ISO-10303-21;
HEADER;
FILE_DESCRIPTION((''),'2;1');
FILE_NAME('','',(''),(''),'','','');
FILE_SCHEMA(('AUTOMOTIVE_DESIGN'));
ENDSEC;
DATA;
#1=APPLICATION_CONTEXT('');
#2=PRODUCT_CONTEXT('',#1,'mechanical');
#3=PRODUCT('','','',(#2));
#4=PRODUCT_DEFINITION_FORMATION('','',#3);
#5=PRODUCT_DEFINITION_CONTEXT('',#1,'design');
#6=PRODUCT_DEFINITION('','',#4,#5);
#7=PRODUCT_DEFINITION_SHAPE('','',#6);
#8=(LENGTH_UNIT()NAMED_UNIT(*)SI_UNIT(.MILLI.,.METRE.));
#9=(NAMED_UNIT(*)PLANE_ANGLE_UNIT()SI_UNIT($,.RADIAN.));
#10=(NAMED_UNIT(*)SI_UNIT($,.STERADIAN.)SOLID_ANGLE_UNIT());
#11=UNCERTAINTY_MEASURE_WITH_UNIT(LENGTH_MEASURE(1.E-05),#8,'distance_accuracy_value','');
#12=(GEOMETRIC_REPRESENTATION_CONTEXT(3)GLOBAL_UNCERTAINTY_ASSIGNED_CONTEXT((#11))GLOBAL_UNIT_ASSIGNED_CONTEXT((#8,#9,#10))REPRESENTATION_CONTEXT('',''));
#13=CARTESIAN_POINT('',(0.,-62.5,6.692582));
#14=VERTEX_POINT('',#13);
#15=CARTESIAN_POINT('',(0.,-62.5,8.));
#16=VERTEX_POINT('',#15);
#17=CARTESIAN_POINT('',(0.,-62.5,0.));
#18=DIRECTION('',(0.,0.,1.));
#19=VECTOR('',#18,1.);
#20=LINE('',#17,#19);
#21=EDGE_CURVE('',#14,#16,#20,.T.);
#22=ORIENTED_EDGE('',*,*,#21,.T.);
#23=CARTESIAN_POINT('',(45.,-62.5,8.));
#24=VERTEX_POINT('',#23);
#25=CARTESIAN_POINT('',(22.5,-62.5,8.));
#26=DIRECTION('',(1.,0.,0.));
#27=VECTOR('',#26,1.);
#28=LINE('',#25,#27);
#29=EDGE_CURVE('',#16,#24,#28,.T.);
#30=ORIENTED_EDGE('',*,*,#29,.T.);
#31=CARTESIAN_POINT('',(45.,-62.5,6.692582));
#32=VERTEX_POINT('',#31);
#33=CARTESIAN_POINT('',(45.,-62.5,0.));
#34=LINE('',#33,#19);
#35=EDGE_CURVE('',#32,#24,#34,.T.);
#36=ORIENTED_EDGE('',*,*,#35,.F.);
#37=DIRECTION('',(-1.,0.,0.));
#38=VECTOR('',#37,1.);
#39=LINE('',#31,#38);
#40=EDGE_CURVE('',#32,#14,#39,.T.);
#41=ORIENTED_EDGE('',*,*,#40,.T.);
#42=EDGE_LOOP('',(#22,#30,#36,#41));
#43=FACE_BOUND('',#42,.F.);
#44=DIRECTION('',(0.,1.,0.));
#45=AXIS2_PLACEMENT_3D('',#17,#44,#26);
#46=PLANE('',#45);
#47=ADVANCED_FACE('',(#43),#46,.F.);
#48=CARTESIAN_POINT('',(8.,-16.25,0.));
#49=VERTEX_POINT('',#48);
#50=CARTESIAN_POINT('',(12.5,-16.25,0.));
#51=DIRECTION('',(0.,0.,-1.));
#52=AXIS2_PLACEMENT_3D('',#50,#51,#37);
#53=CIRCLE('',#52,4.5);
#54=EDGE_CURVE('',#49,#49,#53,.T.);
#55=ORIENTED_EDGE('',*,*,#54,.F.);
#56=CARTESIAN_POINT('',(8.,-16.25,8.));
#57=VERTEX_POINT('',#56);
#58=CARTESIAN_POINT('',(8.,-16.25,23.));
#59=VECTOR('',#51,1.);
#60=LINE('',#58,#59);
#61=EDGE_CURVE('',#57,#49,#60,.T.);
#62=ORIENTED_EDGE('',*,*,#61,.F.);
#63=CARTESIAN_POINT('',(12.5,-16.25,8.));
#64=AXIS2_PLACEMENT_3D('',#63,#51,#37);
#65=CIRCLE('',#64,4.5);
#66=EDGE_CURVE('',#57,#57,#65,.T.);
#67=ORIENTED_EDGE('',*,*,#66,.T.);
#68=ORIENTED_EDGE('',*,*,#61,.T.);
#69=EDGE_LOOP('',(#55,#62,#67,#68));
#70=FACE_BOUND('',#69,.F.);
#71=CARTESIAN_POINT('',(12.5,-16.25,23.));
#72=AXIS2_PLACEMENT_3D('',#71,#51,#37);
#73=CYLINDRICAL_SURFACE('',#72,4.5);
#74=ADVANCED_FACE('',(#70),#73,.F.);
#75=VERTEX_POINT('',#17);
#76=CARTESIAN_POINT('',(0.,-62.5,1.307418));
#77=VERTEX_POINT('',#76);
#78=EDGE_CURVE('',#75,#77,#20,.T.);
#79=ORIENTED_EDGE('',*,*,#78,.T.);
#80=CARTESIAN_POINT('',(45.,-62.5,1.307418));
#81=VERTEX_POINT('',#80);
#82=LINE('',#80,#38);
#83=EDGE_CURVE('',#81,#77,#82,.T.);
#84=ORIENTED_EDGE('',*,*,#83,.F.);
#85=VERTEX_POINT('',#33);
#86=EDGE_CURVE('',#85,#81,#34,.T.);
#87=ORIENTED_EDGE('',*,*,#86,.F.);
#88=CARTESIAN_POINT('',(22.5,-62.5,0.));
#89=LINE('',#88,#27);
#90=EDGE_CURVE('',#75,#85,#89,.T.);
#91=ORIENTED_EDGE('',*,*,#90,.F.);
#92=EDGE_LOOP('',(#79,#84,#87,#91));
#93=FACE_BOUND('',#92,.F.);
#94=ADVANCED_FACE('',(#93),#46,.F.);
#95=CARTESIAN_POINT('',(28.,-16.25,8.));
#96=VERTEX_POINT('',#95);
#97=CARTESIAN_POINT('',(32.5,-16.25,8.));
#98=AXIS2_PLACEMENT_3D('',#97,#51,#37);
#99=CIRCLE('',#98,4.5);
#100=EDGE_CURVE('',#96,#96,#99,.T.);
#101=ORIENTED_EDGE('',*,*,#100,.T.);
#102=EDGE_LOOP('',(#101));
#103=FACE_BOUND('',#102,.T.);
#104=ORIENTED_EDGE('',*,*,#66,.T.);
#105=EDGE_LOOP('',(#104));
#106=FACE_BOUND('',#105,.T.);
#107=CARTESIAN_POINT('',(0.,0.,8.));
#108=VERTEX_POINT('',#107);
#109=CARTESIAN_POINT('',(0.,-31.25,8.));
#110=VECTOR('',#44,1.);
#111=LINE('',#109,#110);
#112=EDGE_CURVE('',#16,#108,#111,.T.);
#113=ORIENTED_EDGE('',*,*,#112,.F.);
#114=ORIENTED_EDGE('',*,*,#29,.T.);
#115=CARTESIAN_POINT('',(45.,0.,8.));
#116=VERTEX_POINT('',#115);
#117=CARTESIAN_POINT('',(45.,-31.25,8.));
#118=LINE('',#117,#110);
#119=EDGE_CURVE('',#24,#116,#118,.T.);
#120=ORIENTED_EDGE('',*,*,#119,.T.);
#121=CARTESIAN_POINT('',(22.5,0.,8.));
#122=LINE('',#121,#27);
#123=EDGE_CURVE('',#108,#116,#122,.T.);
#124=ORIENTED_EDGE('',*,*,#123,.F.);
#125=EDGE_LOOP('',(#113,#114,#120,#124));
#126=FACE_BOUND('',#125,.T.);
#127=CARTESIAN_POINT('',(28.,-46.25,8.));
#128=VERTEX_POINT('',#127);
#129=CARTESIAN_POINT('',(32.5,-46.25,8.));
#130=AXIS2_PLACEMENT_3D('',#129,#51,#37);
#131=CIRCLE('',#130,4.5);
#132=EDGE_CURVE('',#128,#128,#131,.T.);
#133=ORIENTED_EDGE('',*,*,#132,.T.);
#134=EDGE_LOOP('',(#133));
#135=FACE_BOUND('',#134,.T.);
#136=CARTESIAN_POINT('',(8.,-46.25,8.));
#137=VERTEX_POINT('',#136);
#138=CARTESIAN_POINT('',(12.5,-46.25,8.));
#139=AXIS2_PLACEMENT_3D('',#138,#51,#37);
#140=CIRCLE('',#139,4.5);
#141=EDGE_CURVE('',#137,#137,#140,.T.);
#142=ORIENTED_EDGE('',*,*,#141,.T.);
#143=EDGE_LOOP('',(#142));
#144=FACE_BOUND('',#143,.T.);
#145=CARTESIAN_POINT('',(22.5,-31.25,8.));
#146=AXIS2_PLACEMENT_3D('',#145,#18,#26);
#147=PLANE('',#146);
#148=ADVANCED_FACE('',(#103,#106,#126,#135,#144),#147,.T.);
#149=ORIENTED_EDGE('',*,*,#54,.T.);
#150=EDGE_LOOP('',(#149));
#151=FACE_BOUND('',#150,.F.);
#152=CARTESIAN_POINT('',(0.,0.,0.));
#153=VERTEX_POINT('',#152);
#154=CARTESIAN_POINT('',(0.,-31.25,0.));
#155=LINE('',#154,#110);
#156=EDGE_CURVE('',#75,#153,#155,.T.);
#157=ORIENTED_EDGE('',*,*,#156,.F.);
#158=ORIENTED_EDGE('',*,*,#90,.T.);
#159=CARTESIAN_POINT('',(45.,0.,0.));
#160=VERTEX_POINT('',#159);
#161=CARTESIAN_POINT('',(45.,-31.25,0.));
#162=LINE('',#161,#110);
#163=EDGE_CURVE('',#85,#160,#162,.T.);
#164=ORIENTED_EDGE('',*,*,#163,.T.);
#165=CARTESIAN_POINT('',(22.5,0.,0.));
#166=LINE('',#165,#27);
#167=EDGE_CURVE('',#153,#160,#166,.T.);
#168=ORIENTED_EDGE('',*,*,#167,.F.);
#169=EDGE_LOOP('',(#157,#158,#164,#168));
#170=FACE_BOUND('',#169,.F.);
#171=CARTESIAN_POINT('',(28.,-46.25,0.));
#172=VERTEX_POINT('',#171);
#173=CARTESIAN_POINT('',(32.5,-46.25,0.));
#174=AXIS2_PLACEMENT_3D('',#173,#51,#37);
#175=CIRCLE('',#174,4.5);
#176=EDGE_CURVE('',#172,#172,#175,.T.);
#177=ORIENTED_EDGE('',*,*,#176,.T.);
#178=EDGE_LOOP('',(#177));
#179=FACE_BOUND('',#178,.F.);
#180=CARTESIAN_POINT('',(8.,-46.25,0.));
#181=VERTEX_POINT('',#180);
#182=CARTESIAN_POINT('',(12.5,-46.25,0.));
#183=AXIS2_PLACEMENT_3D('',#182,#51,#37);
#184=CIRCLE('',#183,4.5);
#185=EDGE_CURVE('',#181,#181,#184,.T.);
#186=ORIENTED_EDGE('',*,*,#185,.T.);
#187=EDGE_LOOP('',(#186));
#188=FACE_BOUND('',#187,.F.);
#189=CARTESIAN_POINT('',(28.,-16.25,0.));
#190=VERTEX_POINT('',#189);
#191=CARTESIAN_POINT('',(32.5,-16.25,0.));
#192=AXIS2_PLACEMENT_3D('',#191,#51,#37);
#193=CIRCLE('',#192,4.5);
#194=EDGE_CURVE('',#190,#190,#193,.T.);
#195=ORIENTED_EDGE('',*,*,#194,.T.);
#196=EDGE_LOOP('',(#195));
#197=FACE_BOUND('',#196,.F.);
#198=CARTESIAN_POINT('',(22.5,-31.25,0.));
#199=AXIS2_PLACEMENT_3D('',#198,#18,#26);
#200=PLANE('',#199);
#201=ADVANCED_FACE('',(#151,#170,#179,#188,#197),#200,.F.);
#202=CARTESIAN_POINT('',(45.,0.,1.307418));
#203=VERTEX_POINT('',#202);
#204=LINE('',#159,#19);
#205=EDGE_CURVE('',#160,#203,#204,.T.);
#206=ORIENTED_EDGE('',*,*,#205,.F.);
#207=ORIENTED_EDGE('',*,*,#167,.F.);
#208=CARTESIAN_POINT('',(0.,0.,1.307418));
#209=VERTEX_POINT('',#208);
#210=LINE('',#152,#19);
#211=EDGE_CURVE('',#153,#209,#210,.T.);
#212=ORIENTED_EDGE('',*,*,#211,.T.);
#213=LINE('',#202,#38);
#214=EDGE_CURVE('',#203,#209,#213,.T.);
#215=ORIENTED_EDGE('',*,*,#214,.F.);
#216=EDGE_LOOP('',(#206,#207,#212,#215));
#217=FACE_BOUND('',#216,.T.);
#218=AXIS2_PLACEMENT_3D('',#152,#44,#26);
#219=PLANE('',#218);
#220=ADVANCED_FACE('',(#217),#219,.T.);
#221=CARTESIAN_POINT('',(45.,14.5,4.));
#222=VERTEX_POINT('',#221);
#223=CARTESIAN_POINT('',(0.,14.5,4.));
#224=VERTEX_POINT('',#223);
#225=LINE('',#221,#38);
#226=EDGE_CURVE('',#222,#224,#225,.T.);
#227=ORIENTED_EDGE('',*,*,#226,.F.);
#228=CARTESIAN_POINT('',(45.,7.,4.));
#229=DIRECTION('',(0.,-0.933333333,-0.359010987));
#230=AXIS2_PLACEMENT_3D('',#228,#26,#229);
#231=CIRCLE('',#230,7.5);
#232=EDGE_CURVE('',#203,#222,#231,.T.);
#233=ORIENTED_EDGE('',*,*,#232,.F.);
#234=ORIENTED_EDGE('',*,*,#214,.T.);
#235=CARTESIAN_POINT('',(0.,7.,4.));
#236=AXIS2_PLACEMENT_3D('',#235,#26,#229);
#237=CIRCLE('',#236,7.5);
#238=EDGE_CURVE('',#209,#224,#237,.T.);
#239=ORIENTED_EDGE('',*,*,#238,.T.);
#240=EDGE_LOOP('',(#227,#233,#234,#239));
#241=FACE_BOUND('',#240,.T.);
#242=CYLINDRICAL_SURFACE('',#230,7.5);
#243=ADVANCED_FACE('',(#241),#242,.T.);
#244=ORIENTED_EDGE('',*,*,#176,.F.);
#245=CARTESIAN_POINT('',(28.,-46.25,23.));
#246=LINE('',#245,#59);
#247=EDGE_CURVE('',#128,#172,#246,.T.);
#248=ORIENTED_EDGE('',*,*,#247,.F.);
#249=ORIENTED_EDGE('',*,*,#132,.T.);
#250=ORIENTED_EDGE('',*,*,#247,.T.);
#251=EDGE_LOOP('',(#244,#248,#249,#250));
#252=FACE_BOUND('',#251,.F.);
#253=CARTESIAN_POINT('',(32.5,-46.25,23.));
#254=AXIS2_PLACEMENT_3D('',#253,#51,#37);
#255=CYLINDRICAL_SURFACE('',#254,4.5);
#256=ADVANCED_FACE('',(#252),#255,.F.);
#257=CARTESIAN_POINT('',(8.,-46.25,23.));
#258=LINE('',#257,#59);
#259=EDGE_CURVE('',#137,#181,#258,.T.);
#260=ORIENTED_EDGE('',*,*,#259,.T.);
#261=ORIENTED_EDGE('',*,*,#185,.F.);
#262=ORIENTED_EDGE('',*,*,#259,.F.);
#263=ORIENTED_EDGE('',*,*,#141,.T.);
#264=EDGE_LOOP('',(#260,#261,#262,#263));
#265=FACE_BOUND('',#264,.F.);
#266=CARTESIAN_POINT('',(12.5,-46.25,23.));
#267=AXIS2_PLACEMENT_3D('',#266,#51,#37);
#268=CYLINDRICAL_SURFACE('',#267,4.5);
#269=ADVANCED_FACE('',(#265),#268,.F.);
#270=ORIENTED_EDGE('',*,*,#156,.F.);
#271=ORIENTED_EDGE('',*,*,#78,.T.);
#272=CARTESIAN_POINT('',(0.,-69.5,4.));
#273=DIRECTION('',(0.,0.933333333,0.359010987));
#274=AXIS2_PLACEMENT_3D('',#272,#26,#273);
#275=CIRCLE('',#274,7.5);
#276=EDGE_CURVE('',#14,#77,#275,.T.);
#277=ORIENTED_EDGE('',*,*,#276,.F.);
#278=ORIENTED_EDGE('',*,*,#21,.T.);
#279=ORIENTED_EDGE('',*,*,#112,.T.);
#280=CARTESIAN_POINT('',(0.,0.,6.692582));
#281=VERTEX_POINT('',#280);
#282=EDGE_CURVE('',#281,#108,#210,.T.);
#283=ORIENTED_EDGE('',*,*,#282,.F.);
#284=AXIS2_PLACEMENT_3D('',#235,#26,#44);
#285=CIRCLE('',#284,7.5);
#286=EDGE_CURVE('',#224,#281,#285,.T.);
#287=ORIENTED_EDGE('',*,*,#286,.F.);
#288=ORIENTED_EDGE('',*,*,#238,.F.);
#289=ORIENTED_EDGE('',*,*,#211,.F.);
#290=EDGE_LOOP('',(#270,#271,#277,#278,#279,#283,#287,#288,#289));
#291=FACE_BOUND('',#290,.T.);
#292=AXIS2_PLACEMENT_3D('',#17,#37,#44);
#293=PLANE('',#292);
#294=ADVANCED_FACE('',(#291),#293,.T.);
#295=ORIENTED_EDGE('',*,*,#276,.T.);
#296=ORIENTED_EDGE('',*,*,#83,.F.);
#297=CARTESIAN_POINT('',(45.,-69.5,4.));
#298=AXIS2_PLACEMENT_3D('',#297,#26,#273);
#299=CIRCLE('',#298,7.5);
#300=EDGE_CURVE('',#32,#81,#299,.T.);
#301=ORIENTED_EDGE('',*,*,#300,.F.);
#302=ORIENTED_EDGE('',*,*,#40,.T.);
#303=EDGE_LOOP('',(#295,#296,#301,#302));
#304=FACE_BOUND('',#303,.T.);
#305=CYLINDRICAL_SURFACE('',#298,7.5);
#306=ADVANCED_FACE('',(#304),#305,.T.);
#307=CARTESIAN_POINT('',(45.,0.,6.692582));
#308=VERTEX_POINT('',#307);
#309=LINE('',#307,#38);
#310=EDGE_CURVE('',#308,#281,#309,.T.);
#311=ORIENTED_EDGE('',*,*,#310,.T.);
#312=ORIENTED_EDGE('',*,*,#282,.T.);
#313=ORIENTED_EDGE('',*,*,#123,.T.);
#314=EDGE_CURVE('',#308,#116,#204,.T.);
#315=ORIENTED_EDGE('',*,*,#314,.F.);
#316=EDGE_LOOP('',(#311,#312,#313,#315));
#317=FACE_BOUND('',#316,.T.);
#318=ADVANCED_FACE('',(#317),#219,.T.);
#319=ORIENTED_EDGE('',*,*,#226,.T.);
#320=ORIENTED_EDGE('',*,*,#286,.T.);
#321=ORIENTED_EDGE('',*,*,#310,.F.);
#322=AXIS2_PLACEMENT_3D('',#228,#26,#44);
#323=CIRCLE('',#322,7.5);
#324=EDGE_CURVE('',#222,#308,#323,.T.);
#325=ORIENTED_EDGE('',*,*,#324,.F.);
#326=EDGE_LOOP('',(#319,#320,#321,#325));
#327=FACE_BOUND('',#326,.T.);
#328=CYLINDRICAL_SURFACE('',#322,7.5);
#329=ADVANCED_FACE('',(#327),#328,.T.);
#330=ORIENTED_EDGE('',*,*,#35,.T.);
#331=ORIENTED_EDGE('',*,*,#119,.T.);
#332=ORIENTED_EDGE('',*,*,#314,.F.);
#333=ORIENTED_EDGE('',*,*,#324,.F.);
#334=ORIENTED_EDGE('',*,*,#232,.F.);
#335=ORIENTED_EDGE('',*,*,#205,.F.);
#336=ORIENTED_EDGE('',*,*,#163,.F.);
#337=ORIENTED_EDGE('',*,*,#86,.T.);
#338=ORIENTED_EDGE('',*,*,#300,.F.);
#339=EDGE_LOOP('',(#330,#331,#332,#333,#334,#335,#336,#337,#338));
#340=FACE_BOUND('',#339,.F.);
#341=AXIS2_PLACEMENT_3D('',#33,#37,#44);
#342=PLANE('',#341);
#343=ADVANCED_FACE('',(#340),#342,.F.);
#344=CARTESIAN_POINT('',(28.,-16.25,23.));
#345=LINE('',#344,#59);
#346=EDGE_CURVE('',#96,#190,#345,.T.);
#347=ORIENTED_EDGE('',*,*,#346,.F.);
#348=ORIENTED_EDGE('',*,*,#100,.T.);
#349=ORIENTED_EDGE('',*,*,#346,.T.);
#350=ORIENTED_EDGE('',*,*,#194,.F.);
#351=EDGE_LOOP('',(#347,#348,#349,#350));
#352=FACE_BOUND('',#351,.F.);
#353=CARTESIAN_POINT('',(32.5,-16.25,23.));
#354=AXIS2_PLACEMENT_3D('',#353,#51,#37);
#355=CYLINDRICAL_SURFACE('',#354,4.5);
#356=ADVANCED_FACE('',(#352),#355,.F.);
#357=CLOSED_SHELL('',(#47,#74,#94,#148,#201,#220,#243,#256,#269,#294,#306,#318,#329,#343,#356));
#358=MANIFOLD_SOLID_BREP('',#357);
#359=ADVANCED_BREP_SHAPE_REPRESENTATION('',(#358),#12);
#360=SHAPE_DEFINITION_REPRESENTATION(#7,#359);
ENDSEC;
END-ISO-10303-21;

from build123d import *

# Parameters (mm, degrees)
F0_W     = 45
F0_H     = 62.5
F1_DEPTH = 8
F3_D     = 9
F3_DEPTH = 15
F3_TIP   = 2.7038727856
F5_DEPTH = 45


with BuildPart() as f1:
    # F0 (on Top) → F1 (new body)
    with BuildSketch(Plane.XY):
        with Locations((22.5, -31.25)):
            Rectangle(F0_W, F0_H)
    extrude(amount=F1_DEPTH)

    # F3
    with Locations(Plane.XY.offset(8)):
        with Locations((12.5, -16.25), (32.5, -16.25), (32.5, -46.25), (12.5, -46.25)):
            Hole(F3_D / 2, depth=F3_DEPTH)
            with Locations((0, 0, -(F3_DEPTH + F3_TIP / 2))):  # 118° drill point
                Cone(0, F3_D / 2, F3_TIP, mode=Mode.SUBTRACT)

    # F4 (on face) → F5 (join)
    with BuildSketch(Plane.YZ.offset(45)):
        with BuildLine():
            ThreePointArc((-62.5, 1.3074175964), (-62.1260593981, 2.6306936062), (-62, 4))
            ThreePointArc((-62, 4), (-62.1260593981, 5.3693063938), (-62.5, 6.6925824036))
            Line((-62.5, 6.6925824036), (-62.5, 1.3074175964))
        make_face()
        with BuildLine():
            Line((-62.5, 1.3074175964), (-62.5, 6.6925824036))
            ThreePointArc((-62.5, 6.6925824036), (-77, 4), (-62.5, 1.3074175964))
        make_face()
        with BuildLine():
            ThreePointArc((14.5, 4), (8.3693063938, 11.3739406019), (0, 6.6925824036))
            Line((0, 6.6925824036), (0, 1.3074175964))
            ThreePointArc((0, 1.3074175964), (8.3693063938, -3.3739406019), (14.5, 4))
        make_face()
    extrude(amount=-F5_DEPTH)


solid = f1.part
